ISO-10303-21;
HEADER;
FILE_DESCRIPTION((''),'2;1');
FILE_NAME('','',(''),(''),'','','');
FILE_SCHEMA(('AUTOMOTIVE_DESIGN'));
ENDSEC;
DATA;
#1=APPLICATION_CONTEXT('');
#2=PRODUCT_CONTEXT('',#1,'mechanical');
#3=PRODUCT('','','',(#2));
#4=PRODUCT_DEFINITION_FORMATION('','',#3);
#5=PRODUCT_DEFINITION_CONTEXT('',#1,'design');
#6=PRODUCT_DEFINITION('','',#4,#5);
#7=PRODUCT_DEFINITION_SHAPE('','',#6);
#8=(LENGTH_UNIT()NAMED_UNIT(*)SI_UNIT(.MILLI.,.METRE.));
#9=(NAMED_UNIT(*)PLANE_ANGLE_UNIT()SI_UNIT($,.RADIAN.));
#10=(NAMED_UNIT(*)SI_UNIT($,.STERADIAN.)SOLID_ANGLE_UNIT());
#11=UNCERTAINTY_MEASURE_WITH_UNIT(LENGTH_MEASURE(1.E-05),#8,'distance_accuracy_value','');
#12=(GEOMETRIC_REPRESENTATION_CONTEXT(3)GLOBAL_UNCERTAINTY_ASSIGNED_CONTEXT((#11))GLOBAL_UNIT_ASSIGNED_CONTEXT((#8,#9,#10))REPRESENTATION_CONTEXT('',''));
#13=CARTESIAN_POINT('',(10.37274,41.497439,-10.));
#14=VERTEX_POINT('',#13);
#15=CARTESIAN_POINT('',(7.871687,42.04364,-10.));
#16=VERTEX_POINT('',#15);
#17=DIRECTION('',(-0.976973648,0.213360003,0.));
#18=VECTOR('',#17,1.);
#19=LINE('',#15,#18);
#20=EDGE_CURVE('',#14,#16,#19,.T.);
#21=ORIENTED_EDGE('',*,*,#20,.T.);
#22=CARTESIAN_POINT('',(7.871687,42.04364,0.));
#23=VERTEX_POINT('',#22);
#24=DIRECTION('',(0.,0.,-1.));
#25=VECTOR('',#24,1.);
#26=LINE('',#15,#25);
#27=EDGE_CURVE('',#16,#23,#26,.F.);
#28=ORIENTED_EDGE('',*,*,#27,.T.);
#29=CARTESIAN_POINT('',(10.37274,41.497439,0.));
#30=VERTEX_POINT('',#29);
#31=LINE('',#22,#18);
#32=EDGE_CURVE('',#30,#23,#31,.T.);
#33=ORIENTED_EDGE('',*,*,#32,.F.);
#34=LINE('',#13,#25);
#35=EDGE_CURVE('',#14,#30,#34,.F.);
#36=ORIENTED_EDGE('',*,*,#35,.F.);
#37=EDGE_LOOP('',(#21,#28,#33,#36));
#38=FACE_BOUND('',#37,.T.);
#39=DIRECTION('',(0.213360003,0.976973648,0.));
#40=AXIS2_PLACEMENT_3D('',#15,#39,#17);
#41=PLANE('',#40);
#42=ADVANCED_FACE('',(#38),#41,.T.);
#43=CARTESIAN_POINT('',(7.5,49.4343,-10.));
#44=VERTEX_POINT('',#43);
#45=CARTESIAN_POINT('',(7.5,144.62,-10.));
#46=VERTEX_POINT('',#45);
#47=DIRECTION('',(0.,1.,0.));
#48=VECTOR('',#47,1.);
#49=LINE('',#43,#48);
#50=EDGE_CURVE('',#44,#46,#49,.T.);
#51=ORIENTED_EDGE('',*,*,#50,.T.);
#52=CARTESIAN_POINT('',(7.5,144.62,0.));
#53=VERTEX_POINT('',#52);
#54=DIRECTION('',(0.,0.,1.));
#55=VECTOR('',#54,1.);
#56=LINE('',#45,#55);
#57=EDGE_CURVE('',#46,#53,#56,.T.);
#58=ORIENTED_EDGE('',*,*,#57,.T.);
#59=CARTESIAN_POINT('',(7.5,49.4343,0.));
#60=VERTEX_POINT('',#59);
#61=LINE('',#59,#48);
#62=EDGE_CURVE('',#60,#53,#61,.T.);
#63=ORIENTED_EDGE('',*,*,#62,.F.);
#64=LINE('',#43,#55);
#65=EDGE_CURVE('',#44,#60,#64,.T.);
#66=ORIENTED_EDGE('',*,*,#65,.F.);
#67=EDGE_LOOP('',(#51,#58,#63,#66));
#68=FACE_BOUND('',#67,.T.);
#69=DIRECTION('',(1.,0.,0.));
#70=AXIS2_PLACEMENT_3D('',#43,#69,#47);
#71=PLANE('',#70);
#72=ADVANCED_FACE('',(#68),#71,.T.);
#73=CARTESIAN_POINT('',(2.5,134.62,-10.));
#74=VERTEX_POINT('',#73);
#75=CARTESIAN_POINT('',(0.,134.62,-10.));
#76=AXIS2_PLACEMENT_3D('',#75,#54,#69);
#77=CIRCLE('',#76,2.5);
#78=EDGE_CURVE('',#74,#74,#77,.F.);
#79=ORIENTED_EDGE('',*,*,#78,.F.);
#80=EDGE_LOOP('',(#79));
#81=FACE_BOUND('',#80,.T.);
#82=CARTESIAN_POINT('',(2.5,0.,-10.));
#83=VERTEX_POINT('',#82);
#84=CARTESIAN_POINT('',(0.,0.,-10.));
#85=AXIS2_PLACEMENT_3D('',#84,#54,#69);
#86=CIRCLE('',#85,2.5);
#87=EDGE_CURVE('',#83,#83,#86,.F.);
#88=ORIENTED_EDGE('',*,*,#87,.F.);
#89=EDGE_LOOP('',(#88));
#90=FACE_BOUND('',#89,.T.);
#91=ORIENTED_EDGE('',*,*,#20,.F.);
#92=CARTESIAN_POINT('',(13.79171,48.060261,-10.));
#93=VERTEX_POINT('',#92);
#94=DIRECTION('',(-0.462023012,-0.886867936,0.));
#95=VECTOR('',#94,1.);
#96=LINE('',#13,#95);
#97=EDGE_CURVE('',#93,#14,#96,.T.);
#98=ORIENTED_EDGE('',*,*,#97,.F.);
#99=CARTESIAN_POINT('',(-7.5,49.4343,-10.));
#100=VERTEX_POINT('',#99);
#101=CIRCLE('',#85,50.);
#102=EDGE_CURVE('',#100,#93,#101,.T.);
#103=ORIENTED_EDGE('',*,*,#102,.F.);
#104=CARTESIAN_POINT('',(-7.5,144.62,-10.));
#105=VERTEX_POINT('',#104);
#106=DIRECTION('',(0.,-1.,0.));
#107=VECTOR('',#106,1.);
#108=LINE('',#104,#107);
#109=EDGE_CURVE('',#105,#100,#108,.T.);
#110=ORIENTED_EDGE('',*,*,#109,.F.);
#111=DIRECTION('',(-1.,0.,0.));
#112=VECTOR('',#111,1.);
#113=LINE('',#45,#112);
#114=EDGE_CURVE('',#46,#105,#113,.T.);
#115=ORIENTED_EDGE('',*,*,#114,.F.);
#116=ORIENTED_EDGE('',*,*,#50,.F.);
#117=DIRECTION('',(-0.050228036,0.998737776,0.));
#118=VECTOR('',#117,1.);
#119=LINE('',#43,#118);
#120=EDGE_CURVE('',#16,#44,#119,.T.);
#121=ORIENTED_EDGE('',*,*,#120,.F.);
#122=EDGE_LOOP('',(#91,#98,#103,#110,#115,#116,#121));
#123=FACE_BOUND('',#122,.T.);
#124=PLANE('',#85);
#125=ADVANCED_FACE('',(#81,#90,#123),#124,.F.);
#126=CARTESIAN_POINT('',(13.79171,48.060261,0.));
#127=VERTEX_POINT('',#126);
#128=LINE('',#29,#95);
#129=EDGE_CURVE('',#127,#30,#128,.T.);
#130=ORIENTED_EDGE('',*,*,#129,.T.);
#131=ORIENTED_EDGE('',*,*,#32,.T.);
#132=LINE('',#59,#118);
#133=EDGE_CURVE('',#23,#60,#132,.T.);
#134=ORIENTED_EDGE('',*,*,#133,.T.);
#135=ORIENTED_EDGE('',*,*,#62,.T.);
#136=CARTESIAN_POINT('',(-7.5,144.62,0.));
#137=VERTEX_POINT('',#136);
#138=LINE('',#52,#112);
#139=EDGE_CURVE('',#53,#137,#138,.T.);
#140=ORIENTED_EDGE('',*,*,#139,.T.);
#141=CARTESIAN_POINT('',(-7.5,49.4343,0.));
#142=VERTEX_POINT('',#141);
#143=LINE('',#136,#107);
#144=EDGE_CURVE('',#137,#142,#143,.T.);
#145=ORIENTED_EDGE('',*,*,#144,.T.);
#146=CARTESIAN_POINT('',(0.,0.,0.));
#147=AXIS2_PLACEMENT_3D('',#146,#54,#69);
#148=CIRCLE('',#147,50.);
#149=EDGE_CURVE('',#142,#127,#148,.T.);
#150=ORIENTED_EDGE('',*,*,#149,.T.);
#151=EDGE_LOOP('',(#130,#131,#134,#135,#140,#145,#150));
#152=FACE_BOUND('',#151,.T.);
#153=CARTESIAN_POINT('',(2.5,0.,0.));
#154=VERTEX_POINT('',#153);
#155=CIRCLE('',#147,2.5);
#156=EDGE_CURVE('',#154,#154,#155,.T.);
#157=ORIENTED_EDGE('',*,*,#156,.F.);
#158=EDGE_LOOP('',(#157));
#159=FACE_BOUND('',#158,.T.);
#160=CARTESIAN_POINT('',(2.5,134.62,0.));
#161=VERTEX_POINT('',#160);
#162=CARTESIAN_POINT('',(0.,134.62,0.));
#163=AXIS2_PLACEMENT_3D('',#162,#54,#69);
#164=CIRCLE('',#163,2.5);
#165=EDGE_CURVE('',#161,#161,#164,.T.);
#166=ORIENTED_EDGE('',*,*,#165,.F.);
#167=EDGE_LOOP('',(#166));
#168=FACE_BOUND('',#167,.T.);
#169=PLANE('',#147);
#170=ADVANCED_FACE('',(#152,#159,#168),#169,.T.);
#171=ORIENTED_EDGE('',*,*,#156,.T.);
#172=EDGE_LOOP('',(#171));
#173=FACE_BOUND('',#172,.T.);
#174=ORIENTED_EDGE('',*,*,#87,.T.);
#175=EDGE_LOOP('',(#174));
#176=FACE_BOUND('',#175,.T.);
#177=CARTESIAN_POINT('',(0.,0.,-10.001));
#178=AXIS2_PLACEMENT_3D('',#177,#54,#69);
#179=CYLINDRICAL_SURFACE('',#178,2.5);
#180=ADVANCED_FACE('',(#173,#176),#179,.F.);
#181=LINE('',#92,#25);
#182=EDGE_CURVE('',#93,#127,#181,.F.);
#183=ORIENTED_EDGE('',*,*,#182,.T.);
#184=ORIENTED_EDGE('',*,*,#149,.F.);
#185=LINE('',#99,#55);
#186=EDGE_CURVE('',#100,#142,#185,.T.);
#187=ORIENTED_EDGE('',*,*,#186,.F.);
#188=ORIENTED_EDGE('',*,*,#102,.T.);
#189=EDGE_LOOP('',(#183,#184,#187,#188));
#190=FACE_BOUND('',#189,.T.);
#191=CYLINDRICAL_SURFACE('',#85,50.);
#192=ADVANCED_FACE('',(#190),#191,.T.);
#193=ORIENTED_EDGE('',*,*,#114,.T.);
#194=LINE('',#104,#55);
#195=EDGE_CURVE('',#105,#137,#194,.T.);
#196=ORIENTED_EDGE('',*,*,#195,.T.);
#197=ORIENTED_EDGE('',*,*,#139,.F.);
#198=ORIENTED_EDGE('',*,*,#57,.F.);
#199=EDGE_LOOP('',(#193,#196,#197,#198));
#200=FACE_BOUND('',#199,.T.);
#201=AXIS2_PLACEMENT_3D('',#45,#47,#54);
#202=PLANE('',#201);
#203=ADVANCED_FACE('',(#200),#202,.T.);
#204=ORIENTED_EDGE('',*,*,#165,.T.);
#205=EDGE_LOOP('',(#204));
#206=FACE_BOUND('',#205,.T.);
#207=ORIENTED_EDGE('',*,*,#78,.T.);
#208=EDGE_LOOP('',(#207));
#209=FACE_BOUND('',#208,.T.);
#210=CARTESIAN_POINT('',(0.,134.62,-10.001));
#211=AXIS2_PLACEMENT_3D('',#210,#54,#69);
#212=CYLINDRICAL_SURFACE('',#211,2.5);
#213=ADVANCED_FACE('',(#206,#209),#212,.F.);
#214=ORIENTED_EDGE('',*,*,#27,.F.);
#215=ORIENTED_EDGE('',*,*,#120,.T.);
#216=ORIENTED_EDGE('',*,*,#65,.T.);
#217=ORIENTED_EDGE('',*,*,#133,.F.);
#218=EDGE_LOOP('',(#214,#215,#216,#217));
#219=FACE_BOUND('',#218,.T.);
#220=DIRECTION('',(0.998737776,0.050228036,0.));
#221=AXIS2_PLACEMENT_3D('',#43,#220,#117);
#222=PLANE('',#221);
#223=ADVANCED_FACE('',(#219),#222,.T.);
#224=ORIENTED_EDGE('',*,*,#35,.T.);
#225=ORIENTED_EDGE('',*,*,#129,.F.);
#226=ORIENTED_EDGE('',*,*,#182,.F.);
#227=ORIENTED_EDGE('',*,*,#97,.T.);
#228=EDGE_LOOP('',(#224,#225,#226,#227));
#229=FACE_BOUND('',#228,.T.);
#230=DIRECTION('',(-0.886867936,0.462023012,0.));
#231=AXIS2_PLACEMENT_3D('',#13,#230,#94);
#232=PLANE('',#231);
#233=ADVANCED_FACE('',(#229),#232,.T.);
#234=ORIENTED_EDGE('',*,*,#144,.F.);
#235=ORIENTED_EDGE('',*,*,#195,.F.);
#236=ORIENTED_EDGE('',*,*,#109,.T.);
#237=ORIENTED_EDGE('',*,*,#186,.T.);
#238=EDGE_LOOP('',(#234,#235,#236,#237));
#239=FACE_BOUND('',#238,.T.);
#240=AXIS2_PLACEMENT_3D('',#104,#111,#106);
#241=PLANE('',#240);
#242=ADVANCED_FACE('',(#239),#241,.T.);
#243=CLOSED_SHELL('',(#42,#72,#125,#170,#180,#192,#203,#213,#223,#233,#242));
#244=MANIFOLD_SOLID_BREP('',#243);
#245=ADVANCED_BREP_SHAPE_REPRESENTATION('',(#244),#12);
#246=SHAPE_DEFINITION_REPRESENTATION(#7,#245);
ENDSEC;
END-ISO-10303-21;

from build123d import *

# Parameters (mm, degrees)
BASE_FLANGE1_DEPTH = 10
CUT_EXTRUDE1_REACH = 155.346
SKETCH7_R          = 2.5
CUT_EXTRUDE2_REACH = 155.346


# Sheet-metal steps are written as plain solids
with BuildPart() as part:
    # Sketch2 → Base-Flange1 (new body)
    with BuildSketch(Plane.XY):
        with BuildLine():
            Line((7.5, 49.434299833), (7.5, 144.62))
            Line((7.5, 144.62), (-7.5, 144.62))
            Line((-7.5, 144.62), (-7.5, 49.434299833))
            ThreePointArc((-7.5, 49.434299833), (0, -50), (7.5, 49.434299833))
        make_face()
    extrude(amount=-BASE_FLANGE1_DEPTH)

    # Sketch7 → Cut-Extrude1 (cut, up to next)
    with BuildSketch(Plane.XY, mode=Mode.PRIVATE) as cut_extrude1_sk1:
        with Locations((0, 134.62)):
            Circle(SKETCH7_R)
    cut_extrude1_tool1 = extrude(cut_extrude1_sk1.sketch, amount=-CUT_EXTRUDE1_REACH, mode=Mode.PRIVATE) & part.part
    # Sketch7 → Cut-Extrude1 (cut, up to next)
    with BuildSketch(Plane.XY, mode=Mode.PRIVATE) as cut_extrude1_sk2:
        Circle(SKETCH7_R)
    cut_extrude1_tool2 = extrude(cut_extrude1_sk2.sketch, amount=-CUT_EXTRUDE1_REACH, mode=Mode.PRIVATE) & part.part
    add(cut_extrude1_tool1.solids().sort_by_distance((0, 134.62, 0))[0], mode=Mode.SUBTRACT)
    add(cut_extrude1_tool2.solids().sort_by_distance((0, 0, 0))[0], mode=Mode.SUBTRACT)

    # Sketch8 → Cut-Extrude2 (cut, up to next)
    with BuildSketch(Plane.XY, mode=Mode.PRIVATE) as cut_extrude2_sk1:
        with BuildLine():
            Line((7.5, 49.434299833), (7.871687465, 42.043640294))
            Line((7.871687465, 42.043640294), (10.372740004, 41.497438686))
            Line((10.372740004, 41.497438686), (13.791710294, 48.060261414))
            ThreePointArc((13.791710294, 48.060261414), (10.66800015, 48.848682406), (7.5, 49.434299833))
        make_face()
    cut_extrude2_tool1 = extrude(cut_extrude2_sk1.sketch, amount=-CUT_EXTRUDE2_REACH, mode=Mode.PRIVATE) & part.part
    add(cut_extrude2_tool1.solids().sort_by_distance((10.002556, 45.80162, 0))[0], mode=Mode.SUBTRACT)


solid = part.part
